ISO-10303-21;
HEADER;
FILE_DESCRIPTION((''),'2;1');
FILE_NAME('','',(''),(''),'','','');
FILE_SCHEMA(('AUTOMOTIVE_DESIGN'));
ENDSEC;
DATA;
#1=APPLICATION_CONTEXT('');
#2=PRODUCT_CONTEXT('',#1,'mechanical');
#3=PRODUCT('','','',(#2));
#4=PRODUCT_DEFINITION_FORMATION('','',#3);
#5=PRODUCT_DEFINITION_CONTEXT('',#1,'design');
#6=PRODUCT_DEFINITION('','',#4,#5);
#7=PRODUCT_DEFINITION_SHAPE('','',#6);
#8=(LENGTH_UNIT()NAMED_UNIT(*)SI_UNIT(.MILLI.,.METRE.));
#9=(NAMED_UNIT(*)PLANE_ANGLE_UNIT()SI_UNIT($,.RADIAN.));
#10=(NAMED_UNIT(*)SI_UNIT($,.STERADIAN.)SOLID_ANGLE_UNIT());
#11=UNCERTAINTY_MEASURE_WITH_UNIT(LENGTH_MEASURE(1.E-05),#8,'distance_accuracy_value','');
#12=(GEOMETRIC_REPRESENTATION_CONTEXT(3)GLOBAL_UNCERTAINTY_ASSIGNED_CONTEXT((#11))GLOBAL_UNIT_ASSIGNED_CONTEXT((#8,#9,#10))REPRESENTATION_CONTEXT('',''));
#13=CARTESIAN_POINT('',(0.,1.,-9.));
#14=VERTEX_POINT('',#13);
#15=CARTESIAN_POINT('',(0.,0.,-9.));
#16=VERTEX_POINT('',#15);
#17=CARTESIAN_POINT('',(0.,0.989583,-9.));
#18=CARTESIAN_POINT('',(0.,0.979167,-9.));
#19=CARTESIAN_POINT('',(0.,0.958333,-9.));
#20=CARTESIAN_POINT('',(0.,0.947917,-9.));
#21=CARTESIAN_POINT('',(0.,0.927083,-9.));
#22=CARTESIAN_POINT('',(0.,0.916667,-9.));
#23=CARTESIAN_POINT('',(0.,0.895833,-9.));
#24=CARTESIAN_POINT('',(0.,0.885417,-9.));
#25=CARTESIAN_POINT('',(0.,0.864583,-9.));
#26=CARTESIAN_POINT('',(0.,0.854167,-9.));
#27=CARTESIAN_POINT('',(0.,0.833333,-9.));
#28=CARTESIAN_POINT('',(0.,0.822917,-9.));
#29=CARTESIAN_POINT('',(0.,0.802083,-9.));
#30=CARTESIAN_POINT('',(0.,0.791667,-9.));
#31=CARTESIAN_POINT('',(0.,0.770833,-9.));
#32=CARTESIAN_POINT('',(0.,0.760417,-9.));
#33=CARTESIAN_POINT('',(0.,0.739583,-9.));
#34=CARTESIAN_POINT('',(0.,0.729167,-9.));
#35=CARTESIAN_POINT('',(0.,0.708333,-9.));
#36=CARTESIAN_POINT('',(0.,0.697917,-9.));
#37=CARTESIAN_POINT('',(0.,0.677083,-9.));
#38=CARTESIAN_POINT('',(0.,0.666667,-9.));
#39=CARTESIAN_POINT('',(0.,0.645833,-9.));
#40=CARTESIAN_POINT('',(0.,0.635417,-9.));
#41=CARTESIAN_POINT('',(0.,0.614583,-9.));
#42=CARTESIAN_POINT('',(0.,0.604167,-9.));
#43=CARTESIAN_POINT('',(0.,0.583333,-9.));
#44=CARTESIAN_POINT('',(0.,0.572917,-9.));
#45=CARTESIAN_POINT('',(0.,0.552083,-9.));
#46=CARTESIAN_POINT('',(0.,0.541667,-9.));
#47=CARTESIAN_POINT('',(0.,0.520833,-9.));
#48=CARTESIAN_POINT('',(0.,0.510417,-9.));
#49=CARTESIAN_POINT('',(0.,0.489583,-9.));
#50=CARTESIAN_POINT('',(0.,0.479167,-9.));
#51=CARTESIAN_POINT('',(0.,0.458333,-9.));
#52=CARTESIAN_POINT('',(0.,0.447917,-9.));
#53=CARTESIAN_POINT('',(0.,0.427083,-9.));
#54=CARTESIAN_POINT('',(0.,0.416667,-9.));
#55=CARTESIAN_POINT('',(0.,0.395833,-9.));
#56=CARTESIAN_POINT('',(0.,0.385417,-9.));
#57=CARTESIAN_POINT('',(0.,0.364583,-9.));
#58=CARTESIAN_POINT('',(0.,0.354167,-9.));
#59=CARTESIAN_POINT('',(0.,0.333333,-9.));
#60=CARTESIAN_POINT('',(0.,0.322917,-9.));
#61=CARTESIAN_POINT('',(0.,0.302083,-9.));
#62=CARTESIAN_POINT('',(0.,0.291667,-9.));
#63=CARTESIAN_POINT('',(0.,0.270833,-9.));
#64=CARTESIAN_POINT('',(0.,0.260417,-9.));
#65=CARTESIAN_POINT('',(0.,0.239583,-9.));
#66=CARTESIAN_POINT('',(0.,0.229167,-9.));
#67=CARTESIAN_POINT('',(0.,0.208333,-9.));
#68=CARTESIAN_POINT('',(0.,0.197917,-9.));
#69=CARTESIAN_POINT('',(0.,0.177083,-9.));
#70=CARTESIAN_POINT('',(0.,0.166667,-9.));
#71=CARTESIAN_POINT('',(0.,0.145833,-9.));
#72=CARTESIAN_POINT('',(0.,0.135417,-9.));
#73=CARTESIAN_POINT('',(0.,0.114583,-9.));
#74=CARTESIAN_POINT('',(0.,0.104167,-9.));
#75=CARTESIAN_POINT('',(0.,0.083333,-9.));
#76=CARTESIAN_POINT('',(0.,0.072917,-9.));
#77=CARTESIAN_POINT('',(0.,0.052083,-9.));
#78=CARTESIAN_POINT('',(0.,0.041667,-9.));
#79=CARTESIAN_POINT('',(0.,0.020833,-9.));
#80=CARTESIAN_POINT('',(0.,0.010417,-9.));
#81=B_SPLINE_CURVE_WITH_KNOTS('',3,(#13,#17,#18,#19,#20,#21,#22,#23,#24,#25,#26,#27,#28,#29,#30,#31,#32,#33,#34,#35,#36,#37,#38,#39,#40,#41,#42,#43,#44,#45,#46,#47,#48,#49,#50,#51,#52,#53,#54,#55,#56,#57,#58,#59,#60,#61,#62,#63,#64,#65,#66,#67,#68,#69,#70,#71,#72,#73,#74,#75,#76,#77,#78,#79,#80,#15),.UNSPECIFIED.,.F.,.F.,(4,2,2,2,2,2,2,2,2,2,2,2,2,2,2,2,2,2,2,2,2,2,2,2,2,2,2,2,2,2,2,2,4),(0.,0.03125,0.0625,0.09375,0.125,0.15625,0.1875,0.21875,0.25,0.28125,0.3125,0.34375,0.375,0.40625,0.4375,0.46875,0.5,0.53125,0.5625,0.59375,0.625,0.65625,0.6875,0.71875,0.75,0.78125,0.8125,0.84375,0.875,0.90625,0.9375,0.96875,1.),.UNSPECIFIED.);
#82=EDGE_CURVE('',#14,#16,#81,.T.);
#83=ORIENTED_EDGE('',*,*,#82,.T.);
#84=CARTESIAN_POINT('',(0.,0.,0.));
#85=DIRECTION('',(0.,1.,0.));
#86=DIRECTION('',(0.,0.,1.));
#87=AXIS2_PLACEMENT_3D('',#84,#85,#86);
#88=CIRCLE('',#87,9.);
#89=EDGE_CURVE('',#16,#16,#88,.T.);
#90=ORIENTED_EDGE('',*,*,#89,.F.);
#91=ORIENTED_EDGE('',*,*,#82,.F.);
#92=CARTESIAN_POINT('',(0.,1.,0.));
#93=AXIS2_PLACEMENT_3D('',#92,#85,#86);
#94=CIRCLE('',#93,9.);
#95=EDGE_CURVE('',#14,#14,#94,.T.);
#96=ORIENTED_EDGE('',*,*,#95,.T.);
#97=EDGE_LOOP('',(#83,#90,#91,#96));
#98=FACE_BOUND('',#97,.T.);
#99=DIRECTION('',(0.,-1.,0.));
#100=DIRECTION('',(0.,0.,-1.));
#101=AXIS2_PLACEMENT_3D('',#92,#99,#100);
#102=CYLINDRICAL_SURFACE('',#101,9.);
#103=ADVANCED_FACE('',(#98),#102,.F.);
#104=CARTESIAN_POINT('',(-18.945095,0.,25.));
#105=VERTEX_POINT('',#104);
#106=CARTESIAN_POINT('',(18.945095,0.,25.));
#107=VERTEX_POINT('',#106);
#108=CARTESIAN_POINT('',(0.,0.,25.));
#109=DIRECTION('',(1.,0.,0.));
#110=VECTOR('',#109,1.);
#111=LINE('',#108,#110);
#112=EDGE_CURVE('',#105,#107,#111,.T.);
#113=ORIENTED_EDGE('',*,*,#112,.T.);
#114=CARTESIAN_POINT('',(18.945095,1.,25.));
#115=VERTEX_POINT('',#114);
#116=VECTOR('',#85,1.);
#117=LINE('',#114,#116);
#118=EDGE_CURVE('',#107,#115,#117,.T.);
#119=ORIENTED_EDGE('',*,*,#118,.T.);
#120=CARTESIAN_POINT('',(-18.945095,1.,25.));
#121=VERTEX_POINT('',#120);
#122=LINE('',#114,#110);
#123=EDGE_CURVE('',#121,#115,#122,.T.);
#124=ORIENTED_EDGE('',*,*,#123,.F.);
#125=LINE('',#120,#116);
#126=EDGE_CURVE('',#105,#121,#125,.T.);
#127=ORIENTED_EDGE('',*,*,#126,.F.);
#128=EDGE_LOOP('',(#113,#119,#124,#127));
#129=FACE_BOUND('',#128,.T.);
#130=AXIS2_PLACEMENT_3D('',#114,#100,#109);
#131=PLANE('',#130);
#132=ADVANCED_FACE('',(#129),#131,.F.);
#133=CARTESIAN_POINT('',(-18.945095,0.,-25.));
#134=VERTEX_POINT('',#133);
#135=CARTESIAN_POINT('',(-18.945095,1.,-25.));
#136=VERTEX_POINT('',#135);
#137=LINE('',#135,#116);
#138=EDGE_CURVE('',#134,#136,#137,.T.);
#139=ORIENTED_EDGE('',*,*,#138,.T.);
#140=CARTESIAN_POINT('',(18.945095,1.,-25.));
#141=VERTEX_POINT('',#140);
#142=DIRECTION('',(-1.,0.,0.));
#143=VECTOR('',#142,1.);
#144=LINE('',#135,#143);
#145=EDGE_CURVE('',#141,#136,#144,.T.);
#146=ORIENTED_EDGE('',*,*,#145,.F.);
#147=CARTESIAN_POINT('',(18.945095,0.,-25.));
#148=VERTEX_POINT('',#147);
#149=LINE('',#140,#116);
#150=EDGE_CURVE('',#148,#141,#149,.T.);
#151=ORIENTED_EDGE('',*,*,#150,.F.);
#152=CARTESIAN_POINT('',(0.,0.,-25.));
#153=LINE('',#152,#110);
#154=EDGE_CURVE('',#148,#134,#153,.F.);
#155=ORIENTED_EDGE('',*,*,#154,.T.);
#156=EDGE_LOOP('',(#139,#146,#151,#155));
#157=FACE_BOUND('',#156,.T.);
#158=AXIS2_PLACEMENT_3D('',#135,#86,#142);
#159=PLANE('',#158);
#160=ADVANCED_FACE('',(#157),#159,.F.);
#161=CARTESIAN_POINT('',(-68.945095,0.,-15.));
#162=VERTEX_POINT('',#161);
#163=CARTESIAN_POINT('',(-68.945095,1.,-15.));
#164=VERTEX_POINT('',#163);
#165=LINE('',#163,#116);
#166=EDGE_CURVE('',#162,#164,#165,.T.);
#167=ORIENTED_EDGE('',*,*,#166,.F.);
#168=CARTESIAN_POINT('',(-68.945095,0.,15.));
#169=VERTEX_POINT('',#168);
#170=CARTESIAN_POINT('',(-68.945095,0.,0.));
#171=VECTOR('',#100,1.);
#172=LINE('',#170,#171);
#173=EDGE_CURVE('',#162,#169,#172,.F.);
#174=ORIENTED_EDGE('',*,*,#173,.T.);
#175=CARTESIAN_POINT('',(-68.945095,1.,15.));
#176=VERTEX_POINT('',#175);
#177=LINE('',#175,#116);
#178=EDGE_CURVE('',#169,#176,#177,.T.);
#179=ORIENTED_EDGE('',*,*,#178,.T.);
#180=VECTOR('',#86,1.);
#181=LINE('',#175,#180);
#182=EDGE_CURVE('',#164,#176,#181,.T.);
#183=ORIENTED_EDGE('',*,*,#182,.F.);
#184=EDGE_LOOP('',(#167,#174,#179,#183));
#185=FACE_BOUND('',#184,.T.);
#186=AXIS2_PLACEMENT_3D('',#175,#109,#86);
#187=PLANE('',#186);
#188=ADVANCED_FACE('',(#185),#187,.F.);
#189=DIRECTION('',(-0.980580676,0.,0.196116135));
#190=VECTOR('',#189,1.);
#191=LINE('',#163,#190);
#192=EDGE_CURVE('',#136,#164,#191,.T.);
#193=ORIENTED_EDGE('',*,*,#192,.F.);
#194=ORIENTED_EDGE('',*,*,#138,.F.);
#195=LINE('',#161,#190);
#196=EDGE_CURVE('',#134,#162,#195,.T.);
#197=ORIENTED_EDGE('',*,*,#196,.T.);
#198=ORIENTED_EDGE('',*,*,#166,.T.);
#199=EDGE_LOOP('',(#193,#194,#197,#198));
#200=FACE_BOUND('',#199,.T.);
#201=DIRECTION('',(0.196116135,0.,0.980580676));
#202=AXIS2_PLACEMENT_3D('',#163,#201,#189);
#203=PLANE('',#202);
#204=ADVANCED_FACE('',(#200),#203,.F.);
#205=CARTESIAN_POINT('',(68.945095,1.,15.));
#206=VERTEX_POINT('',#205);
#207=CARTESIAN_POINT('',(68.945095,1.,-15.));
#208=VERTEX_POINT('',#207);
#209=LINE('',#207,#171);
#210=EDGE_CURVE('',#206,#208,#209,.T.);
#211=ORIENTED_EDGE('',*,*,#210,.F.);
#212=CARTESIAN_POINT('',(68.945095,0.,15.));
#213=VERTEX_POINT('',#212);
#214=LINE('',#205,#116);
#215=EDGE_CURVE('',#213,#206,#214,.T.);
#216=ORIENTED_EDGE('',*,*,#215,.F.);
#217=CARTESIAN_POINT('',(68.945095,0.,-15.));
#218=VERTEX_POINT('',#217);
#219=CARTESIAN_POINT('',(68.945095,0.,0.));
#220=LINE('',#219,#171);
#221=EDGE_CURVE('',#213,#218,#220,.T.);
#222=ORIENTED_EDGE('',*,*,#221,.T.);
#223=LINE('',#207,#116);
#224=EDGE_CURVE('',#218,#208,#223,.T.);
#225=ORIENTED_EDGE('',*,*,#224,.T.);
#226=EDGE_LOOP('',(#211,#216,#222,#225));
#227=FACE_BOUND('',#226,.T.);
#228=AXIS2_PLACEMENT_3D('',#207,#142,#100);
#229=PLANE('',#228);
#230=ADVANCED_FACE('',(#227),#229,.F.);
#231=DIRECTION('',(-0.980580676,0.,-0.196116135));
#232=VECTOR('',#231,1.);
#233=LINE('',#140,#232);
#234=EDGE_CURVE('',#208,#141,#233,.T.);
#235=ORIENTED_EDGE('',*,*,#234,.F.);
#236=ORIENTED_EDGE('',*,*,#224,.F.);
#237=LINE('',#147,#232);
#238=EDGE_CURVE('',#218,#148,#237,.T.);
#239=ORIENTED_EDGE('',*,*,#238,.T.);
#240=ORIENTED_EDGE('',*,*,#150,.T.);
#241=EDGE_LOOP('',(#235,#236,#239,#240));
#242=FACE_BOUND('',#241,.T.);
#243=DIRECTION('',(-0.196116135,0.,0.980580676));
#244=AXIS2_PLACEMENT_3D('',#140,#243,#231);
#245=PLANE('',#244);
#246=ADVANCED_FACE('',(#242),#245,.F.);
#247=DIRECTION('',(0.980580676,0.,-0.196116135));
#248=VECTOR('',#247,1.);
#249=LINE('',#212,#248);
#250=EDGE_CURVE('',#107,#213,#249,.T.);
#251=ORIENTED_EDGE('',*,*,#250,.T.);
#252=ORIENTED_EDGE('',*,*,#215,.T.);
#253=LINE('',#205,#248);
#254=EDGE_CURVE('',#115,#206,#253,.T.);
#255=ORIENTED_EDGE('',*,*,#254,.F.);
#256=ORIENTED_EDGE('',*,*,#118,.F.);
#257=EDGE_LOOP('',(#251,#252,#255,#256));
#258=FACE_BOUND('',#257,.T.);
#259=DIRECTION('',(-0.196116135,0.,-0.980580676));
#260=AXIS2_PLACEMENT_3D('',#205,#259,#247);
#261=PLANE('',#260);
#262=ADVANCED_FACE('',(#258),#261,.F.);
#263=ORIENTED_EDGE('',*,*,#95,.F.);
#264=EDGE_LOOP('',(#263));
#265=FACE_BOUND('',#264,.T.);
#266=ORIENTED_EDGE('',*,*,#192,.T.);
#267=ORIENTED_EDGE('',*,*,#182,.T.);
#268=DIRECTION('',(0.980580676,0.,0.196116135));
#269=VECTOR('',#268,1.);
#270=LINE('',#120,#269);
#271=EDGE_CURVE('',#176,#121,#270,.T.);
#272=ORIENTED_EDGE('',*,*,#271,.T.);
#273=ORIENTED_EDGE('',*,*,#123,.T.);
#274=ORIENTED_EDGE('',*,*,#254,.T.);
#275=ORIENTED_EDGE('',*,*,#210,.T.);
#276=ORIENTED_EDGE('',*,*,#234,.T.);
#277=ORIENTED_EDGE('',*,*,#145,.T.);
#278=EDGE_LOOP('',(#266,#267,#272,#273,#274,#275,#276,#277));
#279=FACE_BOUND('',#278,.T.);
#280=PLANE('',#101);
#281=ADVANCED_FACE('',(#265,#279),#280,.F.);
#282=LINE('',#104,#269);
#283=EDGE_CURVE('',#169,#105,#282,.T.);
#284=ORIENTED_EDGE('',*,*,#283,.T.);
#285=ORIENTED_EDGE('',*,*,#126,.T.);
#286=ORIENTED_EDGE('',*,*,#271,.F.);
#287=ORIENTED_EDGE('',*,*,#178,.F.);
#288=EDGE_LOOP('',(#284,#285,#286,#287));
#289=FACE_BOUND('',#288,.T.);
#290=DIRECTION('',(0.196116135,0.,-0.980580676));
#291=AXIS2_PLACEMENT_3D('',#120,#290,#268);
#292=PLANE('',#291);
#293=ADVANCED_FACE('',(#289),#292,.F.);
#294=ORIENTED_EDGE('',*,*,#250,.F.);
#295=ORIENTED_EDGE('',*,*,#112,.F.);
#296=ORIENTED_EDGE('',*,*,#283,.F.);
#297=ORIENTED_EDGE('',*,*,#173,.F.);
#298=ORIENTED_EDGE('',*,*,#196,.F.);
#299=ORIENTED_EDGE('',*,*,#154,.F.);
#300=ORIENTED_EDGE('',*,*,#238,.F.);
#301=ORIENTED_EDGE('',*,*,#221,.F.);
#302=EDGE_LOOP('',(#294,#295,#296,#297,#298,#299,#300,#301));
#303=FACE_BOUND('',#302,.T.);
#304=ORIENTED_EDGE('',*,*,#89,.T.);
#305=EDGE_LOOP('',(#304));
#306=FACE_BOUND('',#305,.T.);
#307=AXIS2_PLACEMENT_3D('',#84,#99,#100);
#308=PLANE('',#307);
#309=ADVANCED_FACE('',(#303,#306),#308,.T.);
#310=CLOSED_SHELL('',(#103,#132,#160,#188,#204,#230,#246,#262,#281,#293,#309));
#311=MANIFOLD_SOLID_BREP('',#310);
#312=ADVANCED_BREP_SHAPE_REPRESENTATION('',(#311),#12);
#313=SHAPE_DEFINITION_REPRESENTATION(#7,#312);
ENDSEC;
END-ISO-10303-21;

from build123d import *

# Parameters (mm, degrees)
SKETCH1_R           = 9
BOSS_EXTRUDE1_DEPTH = 1


with BuildPart() as part:
    # Sketch1 → Boss-Extrude1 (new body)
    with BuildSketch(Plane(origin=(0, 0, 0), x_dir=(1, 0, 0), z_dir=(0, 1, 0))):
        Polygon((-18.945095217, 25), (18.945095217, 25), (68.945095217, 15), (68.945095217, -15), (18.945095217, -25), (-18.945095217, -25), (-68.945095217, -15), (-68.945095217, 15), align=None)
        with Locations(Location((0, 0, 0), (0, 0, 270))):
            Circle(SKETCH1_R, mode=Mode.SUBTRACT)
    extrude(amount=BOSS_EXTRUDE1_DEPTH)


solid = part.part
